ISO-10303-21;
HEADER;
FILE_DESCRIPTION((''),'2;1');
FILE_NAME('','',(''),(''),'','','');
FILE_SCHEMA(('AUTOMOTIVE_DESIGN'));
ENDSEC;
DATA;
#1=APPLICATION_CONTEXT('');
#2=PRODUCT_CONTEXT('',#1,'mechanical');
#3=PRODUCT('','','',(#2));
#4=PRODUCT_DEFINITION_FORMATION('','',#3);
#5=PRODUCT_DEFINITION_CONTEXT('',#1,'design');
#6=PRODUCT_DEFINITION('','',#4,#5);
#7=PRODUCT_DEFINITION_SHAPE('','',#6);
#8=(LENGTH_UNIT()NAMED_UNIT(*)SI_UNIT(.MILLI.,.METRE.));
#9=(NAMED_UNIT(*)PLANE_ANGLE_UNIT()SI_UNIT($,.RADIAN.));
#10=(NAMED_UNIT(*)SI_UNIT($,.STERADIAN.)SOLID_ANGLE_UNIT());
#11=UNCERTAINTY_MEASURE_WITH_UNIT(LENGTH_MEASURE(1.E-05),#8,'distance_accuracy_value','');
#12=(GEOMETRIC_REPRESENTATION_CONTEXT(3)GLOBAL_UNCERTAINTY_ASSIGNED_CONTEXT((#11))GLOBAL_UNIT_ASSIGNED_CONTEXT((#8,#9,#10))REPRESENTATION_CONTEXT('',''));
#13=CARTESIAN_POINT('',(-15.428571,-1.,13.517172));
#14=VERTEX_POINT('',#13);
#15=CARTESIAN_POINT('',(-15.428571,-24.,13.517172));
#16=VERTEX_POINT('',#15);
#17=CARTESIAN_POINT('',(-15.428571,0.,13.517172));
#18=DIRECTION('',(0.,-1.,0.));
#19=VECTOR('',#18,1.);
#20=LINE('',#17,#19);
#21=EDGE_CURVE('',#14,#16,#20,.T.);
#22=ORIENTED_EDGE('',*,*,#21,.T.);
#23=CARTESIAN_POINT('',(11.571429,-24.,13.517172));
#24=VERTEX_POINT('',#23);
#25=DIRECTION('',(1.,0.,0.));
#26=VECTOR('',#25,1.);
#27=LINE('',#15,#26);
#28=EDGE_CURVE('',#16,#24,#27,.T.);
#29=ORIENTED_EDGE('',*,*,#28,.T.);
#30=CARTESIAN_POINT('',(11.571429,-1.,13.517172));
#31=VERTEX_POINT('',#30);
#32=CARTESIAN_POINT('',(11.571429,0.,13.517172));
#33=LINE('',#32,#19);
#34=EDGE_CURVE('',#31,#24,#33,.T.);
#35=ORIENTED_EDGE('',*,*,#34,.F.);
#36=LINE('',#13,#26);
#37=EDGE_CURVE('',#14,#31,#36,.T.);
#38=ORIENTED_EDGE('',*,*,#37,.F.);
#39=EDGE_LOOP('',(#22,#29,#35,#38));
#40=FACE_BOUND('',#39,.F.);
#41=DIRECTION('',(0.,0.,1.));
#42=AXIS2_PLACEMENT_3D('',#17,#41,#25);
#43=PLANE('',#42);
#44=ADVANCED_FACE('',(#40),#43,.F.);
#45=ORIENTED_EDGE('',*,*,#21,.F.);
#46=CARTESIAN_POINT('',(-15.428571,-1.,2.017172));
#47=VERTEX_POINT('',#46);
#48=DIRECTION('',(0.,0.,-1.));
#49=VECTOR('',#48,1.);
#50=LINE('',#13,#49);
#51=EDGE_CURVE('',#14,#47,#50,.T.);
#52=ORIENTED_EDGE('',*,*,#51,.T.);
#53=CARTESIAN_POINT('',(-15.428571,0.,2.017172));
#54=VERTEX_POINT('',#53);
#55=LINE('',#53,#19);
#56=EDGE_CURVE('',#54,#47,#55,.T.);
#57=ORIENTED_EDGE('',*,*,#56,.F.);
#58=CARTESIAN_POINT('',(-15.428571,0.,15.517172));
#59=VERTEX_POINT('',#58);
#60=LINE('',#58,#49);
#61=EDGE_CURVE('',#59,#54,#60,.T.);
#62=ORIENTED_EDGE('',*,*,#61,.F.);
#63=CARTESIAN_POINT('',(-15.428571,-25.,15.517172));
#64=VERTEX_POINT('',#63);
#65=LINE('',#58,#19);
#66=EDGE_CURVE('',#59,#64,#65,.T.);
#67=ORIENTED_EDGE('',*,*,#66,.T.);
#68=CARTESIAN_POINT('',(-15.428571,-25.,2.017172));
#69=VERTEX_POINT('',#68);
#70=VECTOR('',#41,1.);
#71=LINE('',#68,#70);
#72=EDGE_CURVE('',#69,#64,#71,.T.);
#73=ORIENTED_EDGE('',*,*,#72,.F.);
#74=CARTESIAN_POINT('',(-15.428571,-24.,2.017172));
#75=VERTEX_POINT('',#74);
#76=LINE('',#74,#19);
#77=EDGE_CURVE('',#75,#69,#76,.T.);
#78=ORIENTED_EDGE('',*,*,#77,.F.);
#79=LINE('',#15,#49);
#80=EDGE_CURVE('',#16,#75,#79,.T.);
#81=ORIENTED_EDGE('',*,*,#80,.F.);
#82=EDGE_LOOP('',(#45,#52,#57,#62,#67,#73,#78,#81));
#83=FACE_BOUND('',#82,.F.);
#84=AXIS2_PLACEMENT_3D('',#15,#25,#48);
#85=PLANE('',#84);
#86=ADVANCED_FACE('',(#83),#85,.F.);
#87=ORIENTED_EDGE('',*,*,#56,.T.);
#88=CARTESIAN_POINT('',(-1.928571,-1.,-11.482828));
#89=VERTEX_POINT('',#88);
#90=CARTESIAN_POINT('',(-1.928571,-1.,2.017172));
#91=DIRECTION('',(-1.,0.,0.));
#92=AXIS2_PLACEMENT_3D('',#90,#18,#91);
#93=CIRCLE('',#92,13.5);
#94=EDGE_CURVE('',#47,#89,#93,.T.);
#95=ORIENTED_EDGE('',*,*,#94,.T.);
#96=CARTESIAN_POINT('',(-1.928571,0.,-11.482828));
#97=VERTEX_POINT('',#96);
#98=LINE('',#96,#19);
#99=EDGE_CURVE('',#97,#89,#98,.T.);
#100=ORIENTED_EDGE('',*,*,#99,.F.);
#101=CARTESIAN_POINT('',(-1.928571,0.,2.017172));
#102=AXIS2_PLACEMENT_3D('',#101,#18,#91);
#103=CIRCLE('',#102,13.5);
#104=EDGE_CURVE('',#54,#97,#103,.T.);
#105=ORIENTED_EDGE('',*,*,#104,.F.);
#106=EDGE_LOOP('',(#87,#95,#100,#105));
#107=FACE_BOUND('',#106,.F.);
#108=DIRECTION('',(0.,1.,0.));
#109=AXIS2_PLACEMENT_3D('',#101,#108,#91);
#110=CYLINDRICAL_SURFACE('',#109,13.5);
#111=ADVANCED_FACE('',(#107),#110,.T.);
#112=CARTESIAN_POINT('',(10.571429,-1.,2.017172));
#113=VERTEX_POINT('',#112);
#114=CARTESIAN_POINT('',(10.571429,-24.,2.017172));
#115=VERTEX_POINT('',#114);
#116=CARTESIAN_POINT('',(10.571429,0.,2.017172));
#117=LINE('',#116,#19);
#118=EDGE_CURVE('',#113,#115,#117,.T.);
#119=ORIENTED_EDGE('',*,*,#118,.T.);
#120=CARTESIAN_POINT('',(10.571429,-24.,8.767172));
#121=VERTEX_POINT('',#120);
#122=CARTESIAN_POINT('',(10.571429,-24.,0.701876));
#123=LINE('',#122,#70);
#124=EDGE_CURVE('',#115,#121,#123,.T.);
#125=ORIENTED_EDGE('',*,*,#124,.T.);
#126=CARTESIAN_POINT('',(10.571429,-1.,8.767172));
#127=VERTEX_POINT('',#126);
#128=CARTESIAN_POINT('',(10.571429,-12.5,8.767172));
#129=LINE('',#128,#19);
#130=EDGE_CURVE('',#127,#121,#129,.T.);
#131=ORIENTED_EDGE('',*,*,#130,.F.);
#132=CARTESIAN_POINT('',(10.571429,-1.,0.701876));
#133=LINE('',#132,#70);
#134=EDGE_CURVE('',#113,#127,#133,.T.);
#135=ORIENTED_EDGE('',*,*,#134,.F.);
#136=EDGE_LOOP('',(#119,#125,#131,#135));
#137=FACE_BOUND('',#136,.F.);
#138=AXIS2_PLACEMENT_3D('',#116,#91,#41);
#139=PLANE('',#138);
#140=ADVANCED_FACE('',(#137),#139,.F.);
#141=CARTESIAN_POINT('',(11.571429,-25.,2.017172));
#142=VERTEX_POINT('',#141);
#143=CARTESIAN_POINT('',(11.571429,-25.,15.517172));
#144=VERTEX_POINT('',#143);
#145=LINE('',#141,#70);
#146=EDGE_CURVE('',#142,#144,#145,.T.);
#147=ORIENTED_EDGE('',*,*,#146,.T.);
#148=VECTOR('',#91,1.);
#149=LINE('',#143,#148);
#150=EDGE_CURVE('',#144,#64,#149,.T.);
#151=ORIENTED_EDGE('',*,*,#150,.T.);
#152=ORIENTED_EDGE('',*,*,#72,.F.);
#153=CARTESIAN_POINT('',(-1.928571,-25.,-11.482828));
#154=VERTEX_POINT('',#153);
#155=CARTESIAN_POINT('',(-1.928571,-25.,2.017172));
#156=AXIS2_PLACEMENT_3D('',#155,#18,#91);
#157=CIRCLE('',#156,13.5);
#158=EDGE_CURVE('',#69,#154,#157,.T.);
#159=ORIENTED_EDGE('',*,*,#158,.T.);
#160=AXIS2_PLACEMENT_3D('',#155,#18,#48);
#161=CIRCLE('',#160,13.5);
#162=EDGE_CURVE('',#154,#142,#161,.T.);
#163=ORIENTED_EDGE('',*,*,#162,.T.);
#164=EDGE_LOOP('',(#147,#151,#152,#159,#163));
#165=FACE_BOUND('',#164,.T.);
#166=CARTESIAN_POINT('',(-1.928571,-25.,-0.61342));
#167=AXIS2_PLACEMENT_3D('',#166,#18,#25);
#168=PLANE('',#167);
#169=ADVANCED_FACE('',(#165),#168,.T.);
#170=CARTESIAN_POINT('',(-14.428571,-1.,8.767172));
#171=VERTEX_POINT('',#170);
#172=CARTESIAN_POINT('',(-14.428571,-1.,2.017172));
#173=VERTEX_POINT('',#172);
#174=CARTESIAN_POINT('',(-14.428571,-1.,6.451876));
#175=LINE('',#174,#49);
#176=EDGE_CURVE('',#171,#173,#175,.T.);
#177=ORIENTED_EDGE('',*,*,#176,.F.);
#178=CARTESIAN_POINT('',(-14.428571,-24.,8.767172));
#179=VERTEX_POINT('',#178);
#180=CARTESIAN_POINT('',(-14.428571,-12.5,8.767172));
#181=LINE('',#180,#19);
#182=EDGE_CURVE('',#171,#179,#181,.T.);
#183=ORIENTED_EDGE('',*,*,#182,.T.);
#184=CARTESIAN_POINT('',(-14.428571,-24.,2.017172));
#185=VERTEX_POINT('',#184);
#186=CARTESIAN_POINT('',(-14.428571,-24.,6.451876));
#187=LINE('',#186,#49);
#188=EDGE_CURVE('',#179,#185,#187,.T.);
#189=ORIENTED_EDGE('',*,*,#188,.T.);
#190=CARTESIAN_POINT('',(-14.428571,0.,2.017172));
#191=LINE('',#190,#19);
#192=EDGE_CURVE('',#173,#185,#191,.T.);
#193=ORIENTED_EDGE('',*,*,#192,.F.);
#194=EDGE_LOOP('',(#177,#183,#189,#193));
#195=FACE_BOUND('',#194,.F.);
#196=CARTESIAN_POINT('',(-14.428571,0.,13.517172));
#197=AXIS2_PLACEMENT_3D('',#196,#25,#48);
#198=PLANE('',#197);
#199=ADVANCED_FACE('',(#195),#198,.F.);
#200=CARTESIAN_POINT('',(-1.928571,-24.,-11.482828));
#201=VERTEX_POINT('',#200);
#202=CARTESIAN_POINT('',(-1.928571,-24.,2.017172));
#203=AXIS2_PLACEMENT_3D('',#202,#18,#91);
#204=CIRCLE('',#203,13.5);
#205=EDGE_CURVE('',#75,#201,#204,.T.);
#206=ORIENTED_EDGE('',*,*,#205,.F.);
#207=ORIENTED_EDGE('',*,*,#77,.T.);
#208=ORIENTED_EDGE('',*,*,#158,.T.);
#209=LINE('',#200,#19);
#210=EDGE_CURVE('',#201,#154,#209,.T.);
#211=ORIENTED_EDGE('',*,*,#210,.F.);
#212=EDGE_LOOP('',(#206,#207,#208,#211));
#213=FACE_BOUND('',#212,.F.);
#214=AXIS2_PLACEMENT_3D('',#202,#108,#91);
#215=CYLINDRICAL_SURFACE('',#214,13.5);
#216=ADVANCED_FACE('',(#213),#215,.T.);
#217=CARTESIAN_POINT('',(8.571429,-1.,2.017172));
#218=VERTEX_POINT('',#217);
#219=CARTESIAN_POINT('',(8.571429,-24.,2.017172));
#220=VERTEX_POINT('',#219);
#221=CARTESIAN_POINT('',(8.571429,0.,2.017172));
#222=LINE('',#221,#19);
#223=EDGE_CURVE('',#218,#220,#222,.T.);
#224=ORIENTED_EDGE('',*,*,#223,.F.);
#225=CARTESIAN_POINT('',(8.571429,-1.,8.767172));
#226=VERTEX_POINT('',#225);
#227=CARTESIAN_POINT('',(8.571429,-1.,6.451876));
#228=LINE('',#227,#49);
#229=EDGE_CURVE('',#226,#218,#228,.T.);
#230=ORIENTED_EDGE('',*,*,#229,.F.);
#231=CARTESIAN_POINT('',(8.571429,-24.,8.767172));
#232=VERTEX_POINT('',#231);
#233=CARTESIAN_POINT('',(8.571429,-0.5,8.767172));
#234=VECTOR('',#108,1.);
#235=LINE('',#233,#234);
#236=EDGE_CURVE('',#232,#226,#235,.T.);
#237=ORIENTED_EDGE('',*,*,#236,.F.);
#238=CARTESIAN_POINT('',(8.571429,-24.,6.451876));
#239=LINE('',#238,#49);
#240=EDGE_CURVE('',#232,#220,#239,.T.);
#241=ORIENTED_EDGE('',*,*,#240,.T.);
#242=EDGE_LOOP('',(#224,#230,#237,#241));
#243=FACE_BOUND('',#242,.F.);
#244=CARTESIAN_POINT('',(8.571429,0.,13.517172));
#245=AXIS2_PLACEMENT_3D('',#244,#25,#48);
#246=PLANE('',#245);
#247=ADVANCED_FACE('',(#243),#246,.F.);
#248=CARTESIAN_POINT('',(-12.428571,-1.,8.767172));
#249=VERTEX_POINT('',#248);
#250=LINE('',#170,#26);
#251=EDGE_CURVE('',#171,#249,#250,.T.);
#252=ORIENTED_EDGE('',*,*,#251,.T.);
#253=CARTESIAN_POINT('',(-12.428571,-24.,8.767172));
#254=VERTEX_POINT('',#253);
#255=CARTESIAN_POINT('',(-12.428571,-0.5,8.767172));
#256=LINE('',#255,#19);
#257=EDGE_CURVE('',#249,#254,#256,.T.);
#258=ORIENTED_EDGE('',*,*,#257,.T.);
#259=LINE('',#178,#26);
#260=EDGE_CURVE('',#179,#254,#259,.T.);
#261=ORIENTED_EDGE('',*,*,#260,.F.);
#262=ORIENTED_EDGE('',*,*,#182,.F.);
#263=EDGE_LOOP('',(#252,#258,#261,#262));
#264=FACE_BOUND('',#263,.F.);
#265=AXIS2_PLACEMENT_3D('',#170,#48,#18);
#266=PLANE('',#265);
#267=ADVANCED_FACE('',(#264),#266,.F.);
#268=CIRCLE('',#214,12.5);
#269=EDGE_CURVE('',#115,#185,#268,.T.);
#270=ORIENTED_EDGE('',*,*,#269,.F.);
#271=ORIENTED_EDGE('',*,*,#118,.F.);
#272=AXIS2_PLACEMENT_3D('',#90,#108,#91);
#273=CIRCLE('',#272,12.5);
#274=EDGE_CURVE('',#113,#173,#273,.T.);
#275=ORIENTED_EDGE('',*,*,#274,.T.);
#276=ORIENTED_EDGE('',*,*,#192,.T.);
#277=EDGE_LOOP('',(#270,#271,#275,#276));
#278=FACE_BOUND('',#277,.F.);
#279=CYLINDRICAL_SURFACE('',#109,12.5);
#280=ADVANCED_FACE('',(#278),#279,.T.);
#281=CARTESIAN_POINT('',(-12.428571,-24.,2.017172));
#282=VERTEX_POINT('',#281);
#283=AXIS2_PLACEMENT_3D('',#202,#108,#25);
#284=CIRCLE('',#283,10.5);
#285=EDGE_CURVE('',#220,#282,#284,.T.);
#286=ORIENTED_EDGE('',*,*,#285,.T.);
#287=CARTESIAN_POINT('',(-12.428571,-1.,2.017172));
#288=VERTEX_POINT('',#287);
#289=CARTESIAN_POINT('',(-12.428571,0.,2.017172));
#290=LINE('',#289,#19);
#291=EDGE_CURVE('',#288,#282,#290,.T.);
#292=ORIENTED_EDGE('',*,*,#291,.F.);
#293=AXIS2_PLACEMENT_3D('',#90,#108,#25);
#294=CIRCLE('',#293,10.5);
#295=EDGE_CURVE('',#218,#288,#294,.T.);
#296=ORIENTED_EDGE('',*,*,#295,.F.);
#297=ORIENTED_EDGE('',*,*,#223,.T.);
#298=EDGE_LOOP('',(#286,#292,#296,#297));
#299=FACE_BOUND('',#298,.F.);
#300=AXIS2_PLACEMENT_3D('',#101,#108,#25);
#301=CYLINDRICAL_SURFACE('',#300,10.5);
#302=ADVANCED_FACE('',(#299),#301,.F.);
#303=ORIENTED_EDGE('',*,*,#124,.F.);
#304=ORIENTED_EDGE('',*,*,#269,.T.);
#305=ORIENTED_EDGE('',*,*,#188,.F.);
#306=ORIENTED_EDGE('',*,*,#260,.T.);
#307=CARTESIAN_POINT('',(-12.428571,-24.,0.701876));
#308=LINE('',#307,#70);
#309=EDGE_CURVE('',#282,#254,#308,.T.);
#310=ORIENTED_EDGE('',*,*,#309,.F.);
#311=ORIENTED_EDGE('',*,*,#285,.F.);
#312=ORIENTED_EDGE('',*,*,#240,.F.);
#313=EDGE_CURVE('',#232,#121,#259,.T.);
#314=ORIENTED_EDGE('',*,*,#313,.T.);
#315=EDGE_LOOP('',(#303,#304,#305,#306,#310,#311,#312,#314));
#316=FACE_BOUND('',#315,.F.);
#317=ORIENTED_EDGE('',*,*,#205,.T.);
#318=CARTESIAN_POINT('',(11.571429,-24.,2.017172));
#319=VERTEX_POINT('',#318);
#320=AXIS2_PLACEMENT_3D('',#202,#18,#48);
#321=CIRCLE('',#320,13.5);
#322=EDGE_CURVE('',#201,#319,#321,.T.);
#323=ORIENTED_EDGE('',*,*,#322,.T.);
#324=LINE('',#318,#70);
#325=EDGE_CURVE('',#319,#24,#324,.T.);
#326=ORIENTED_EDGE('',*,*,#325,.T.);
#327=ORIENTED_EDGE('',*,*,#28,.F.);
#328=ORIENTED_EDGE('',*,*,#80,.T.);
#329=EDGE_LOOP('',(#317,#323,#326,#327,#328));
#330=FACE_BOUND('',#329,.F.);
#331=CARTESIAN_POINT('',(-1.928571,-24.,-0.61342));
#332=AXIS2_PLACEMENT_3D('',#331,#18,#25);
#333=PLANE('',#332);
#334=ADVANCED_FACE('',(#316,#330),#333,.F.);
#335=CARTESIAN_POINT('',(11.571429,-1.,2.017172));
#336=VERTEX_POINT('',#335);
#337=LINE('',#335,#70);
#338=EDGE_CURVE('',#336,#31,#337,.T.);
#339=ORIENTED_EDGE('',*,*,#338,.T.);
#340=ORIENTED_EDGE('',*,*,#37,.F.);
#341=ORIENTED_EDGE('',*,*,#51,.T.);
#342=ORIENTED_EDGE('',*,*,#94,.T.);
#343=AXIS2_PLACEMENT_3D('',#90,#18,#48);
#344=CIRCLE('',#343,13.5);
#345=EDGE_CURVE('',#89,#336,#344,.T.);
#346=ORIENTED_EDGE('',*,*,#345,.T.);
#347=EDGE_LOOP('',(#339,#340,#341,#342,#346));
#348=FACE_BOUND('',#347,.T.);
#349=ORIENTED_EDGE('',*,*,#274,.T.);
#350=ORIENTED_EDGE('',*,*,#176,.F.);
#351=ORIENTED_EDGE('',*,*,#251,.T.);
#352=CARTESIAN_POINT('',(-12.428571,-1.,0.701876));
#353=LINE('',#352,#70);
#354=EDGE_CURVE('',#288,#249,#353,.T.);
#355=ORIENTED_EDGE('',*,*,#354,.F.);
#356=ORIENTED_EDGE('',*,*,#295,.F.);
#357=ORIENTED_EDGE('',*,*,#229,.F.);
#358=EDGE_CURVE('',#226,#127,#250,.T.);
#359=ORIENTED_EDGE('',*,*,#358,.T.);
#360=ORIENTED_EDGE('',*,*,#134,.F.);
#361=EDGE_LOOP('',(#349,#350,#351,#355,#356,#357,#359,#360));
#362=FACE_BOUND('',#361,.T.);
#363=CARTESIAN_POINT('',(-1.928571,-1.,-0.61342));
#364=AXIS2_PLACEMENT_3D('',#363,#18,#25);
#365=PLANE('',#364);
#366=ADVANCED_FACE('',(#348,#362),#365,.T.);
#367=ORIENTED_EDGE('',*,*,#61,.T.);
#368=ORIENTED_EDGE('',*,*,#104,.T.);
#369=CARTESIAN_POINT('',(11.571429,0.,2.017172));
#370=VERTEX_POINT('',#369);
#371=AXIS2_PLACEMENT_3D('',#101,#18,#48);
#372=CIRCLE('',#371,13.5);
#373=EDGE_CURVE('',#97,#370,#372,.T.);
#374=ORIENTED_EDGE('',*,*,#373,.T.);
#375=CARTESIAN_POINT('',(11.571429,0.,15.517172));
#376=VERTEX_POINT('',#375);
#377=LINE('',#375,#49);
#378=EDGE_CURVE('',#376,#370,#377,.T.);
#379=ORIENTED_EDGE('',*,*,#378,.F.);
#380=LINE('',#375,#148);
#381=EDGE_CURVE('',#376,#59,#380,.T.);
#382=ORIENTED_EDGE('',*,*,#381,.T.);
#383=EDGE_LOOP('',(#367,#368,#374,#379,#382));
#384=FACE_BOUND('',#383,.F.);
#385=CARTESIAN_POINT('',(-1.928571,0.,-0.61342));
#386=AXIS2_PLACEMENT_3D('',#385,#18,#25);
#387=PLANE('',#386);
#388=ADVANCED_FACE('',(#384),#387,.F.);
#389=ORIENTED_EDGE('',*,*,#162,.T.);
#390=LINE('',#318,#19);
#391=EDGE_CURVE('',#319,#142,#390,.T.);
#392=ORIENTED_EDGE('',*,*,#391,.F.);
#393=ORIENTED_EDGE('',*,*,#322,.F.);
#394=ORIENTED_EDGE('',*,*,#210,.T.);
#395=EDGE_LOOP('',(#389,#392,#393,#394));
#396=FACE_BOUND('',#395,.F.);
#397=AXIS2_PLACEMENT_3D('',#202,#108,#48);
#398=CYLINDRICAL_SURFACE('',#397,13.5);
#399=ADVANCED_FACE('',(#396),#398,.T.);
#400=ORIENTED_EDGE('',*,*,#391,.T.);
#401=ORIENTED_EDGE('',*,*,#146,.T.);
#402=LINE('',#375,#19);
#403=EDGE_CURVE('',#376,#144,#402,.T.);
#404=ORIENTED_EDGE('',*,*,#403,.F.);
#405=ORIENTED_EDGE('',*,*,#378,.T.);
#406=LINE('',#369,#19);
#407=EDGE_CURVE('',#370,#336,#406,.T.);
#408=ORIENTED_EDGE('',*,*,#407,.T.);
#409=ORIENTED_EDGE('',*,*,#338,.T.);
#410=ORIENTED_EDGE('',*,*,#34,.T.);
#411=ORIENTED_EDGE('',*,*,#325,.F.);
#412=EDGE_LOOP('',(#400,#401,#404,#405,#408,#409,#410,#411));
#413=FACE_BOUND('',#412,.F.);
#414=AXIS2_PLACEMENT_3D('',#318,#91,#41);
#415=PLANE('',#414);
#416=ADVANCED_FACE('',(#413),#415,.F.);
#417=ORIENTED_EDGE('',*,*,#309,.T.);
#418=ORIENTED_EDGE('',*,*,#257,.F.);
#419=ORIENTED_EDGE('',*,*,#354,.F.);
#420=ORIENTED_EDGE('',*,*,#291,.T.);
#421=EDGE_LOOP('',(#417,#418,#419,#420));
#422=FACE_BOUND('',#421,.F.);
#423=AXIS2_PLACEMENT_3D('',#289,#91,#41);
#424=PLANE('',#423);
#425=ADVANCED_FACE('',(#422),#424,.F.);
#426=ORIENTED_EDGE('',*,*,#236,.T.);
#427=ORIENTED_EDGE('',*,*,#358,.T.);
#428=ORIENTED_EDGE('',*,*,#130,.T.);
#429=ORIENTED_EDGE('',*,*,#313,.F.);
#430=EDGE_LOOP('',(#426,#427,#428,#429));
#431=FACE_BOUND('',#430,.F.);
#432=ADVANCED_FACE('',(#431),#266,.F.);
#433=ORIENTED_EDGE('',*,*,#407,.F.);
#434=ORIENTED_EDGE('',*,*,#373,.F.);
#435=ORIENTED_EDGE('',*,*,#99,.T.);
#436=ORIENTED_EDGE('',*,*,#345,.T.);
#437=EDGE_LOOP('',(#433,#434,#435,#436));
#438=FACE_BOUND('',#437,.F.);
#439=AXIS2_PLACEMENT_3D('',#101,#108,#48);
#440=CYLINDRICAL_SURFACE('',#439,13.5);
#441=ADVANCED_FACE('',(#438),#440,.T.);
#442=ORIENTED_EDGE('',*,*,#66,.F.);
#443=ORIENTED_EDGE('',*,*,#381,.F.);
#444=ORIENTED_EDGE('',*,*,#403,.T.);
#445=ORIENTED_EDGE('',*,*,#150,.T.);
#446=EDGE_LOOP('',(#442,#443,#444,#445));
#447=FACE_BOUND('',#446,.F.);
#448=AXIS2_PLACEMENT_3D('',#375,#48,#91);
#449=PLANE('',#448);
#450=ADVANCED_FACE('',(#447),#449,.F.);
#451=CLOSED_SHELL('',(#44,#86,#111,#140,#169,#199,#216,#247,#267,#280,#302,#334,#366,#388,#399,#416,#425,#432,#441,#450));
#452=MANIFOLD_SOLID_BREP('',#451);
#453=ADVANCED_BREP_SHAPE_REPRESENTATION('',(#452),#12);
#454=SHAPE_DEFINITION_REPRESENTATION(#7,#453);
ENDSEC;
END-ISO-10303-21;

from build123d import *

# Parameters (mm, degrees)
F0_W     = 2
F0_H     = 2
F0_W_2   = 1
F0_W_3   = 21
F1_DEPTH = 25
F2_DEPTH = 1
F3_START = 24
F3_DEPTH = 1
F4_W     = 23
F4_H     = 4.75
F5_DEPTH = 25


with BuildPart() as f1:
    # F0 (on Front) → F1 (new body)
    with BuildSketch(Plane.XZ):
        with BuildLine():
            Line((-12.4285714286, 13.5171716937), (-14.4285714286, 13.5171716937))
            Line((-14.4285714286, 13.5171716937), (-14.4285714286, 2.0171716937))
            ThreePointArc((-14.4285714286, 2.0171716937), (-1.9285714286, -10.4828283063), (10.5714285714, 2.0171716937))
            Line((10.5714285714, 2.0171716937), (10.5714285714, 13.5171716937))
            Line((10.5714285714, 13.5171716937), (8.5714285714, 13.5171716937))
            Line((8.5714285714, 13.5171716937), (8.5714285714, 2.0171716937))
            ThreePointArc((8.5714285714, 2.0171716937), (-1.9285714286, -8.4828283063), (-12.4285714286, 2.0171716937))
            Line((-12.4285714286, 2.0171716937), (-12.4285714286, 13.5171716937))
        make_face()
        with Locations((9.5714285714, 14.5171716937)):
            Rectangle(F0_W, F0_H)
        with Locations((-13.4285714286, 14.5171716937)):
            Rectangle(F0_W, F0_H)
        with Locations((-14.9285714286, 14.5171716937)):
            Rectangle(F0_W_2, F0_H)
        with Locations((-1.9285714286, 14.5171716937)):
            Rectangle(F0_W_3, F0_H)
        with Locations((11.0714285714, 14.5171716937)):
            Rectangle(F0_W_2, F0_H)
    extrude(amount=F1_DEPTH)

    # F0 (on Front) → F2 (join)
    with BuildSketch(Plane.XZ):
        with BuildLine():
            Line((-14.4285714286, 13.5171716937), (-15.4285714286, 13.5171716937))
            Line((-15.4285714286, 13.5171716937), (-15.4285714286, 2.0171716937))
            ThreePointArc((-15.4285714286, 2.0171716937), (-11.4745129746, -7.5287698523), (-1.9285714286, -11.4828283063))
            ThreePointArc((-1.9285714286, -11.4828283063), (7.6173701174, -7.5287698523), (11.5714285714, 2.0171716937))
            Line((11.5714285714, 2.0171716937), (11.5714285714, 13.5171716937))
            Line((11.5714285714, 13.5171716937), (10.5714285714, 13.5171716937))
            Line((10.5714285714, 13.5171716937), (10.5714285714, 2.0171716937))
            ThreePointArc((10.5714285714, 2.0171716937), (-1.9285714286, -10.4828283063), (-14.4285714286, 2.0171716937))
            Line((-14.4285714286, 2.0171716937), (-14.4285714286, 13.5171716937))
        make_face()
        with BuildLine():
            Line((-12.4285714286, 13.5171716937), (-14.4285714286, 13.5171716937))
            Line((-14.4285714286, 13.5171716937), (-14.4285714286, 2.0171716937))
            ThreePointArc((-14.4285714286, 2.0171716937), (-1.9285714286, -10.4828283063), (10.5714285714, 2.0171716937))
            Line((10.5714285714, 2.0171716937), (10.5714285714, 13.5171716937))
            Line((10.5714285714, 13.5171716937), (8.5714285714, 13.5171716937))
            Line((8.5714285714, 13.5171716937), (8.5714285714, 2.0171716937))
            ThreePointArc((8.5714285714, 2.0171716937), (-1.9285714286, -8.4828283063), (-12.4285714286, 2.0171716937))
            Line((-12.4285714286, 2.0171716937), (-12.4285714286, 13.5171716937))
        make_face()
        with BuildLine():
            Line((8.5714285714, 13.5171716937), (-12.4285714286, 13.5171716937))
            Line((-12.4285714286, 13.5171716937), (-12.4285714286, 2.0171716937))
            ThreePointArc((-12.4285714286, 2.0171716937), (-1.9285714286, -8.4828283063), (8.5714285714, 2.0171716937))
            Line((8.5714285714, 2.0171716937), (8.5714285714, 13.5171716937))
        make_face()
    extrude(amount=F2_DEPTH)

    # F0 (on Front) → F3 (join)
    with BuildSketch(Plane.XZ.offset(F3_START)):
        with BuildLine():
            Line((-14.4285714286, 13.5171716937), (-15.4285714286, 13.5171716937))
            Line((-15.4285714286, 13.5171716937), (-15.4285714286, 2.0171716937))
            ThreePointArc((-15.4285714286, 2.0171716937), (-11.4745129746, -7.5287698523), (-1.9285714286, -11.4828283063))
            ThreePointArc((-1.9285714286, -11.4828283063), (7.6173701174, -7.5287698523), (11.5714285714, 2.0171716937))
            Line((11.5714285714, 2.0171716937), (11.5714285714, 13.5171716937))
            Line((11.5714285714, 13.5171716937), (10.5714285714, 13.5171716937))
            Line((10.5714285714, 13.5171716937), (10.5714285714, 2.0171716937))
            ThreePointArc((10.5714285714, 2.0171716937), (-1.9285714286, -10.4828283063), (-14.4285714286, 2.0171716937))
            Line((-14.4285714286, 2.0171716937), (-14.4285714286, 13.5171716937))
        make_face()
        with BuildLine():
            Line((-12.4285714286, 13.5171716937), (-14.4285714286, 13.5171716937))
            Line((-14.4285714286, 13.5171716937), (-14.4285714286, 2.0171716937))
            ThreePointArc((-14.4285714286, 2.0171716937), (-1.9285714286, -10.4828283063), (10.5714285714, 2.0171716937))
            Line((10.5714285714, 2.0171716937), (10.5714285714, 13.5171716937))
            Line((10.5714285714, 13.5171716937), (8.5714285714, 13.5171716937))
            Line((8.5714285714, 13.5171716937), (8.5714285714, 2.0171716937))
            ThreePointArc((8.5714285714, 2.0171716937), (-1.9285714286, -8.4828283063), (-12.4285714286, 2.0171716937))
            Line((-12.4285714286, 2.0171716937), (-12.4285714286, 13.5171716937))
        make_face()
        with BuildLine():
            Line((8.5714285714, 13.5171716937), (-12.4285714286, 13.5171716937))
            Line((-12.4285714286, 13.5171716937), (-12.4285714286, 2.0171716937))
            ThreePointArc((-12.4285714286, 2.0171716937), (-1.9285714286, -8.4828283063), (8.5714285714, 2.0171716937))
            Line((8.5714285714, 2.0171716937), (8.5714285714, 13.5171716937))
        make_face()
    extrude(amount=F3_DEPTH)

    # F4 (on face) → F5 (cut, through all)
    with BuildSketch(Plane(origin=(-14.4285714286, 0, 0), x_dir=(0, -1, 0), z_dir=(-1, 0, 0))):
        with Locations((12.5, 11.1421716937)):
            Rectangle(F4_W, F4_H)
    extrude(amount=-F5_DEPTH, mode=Mode.SUBTRACT)


solid = f1.part
